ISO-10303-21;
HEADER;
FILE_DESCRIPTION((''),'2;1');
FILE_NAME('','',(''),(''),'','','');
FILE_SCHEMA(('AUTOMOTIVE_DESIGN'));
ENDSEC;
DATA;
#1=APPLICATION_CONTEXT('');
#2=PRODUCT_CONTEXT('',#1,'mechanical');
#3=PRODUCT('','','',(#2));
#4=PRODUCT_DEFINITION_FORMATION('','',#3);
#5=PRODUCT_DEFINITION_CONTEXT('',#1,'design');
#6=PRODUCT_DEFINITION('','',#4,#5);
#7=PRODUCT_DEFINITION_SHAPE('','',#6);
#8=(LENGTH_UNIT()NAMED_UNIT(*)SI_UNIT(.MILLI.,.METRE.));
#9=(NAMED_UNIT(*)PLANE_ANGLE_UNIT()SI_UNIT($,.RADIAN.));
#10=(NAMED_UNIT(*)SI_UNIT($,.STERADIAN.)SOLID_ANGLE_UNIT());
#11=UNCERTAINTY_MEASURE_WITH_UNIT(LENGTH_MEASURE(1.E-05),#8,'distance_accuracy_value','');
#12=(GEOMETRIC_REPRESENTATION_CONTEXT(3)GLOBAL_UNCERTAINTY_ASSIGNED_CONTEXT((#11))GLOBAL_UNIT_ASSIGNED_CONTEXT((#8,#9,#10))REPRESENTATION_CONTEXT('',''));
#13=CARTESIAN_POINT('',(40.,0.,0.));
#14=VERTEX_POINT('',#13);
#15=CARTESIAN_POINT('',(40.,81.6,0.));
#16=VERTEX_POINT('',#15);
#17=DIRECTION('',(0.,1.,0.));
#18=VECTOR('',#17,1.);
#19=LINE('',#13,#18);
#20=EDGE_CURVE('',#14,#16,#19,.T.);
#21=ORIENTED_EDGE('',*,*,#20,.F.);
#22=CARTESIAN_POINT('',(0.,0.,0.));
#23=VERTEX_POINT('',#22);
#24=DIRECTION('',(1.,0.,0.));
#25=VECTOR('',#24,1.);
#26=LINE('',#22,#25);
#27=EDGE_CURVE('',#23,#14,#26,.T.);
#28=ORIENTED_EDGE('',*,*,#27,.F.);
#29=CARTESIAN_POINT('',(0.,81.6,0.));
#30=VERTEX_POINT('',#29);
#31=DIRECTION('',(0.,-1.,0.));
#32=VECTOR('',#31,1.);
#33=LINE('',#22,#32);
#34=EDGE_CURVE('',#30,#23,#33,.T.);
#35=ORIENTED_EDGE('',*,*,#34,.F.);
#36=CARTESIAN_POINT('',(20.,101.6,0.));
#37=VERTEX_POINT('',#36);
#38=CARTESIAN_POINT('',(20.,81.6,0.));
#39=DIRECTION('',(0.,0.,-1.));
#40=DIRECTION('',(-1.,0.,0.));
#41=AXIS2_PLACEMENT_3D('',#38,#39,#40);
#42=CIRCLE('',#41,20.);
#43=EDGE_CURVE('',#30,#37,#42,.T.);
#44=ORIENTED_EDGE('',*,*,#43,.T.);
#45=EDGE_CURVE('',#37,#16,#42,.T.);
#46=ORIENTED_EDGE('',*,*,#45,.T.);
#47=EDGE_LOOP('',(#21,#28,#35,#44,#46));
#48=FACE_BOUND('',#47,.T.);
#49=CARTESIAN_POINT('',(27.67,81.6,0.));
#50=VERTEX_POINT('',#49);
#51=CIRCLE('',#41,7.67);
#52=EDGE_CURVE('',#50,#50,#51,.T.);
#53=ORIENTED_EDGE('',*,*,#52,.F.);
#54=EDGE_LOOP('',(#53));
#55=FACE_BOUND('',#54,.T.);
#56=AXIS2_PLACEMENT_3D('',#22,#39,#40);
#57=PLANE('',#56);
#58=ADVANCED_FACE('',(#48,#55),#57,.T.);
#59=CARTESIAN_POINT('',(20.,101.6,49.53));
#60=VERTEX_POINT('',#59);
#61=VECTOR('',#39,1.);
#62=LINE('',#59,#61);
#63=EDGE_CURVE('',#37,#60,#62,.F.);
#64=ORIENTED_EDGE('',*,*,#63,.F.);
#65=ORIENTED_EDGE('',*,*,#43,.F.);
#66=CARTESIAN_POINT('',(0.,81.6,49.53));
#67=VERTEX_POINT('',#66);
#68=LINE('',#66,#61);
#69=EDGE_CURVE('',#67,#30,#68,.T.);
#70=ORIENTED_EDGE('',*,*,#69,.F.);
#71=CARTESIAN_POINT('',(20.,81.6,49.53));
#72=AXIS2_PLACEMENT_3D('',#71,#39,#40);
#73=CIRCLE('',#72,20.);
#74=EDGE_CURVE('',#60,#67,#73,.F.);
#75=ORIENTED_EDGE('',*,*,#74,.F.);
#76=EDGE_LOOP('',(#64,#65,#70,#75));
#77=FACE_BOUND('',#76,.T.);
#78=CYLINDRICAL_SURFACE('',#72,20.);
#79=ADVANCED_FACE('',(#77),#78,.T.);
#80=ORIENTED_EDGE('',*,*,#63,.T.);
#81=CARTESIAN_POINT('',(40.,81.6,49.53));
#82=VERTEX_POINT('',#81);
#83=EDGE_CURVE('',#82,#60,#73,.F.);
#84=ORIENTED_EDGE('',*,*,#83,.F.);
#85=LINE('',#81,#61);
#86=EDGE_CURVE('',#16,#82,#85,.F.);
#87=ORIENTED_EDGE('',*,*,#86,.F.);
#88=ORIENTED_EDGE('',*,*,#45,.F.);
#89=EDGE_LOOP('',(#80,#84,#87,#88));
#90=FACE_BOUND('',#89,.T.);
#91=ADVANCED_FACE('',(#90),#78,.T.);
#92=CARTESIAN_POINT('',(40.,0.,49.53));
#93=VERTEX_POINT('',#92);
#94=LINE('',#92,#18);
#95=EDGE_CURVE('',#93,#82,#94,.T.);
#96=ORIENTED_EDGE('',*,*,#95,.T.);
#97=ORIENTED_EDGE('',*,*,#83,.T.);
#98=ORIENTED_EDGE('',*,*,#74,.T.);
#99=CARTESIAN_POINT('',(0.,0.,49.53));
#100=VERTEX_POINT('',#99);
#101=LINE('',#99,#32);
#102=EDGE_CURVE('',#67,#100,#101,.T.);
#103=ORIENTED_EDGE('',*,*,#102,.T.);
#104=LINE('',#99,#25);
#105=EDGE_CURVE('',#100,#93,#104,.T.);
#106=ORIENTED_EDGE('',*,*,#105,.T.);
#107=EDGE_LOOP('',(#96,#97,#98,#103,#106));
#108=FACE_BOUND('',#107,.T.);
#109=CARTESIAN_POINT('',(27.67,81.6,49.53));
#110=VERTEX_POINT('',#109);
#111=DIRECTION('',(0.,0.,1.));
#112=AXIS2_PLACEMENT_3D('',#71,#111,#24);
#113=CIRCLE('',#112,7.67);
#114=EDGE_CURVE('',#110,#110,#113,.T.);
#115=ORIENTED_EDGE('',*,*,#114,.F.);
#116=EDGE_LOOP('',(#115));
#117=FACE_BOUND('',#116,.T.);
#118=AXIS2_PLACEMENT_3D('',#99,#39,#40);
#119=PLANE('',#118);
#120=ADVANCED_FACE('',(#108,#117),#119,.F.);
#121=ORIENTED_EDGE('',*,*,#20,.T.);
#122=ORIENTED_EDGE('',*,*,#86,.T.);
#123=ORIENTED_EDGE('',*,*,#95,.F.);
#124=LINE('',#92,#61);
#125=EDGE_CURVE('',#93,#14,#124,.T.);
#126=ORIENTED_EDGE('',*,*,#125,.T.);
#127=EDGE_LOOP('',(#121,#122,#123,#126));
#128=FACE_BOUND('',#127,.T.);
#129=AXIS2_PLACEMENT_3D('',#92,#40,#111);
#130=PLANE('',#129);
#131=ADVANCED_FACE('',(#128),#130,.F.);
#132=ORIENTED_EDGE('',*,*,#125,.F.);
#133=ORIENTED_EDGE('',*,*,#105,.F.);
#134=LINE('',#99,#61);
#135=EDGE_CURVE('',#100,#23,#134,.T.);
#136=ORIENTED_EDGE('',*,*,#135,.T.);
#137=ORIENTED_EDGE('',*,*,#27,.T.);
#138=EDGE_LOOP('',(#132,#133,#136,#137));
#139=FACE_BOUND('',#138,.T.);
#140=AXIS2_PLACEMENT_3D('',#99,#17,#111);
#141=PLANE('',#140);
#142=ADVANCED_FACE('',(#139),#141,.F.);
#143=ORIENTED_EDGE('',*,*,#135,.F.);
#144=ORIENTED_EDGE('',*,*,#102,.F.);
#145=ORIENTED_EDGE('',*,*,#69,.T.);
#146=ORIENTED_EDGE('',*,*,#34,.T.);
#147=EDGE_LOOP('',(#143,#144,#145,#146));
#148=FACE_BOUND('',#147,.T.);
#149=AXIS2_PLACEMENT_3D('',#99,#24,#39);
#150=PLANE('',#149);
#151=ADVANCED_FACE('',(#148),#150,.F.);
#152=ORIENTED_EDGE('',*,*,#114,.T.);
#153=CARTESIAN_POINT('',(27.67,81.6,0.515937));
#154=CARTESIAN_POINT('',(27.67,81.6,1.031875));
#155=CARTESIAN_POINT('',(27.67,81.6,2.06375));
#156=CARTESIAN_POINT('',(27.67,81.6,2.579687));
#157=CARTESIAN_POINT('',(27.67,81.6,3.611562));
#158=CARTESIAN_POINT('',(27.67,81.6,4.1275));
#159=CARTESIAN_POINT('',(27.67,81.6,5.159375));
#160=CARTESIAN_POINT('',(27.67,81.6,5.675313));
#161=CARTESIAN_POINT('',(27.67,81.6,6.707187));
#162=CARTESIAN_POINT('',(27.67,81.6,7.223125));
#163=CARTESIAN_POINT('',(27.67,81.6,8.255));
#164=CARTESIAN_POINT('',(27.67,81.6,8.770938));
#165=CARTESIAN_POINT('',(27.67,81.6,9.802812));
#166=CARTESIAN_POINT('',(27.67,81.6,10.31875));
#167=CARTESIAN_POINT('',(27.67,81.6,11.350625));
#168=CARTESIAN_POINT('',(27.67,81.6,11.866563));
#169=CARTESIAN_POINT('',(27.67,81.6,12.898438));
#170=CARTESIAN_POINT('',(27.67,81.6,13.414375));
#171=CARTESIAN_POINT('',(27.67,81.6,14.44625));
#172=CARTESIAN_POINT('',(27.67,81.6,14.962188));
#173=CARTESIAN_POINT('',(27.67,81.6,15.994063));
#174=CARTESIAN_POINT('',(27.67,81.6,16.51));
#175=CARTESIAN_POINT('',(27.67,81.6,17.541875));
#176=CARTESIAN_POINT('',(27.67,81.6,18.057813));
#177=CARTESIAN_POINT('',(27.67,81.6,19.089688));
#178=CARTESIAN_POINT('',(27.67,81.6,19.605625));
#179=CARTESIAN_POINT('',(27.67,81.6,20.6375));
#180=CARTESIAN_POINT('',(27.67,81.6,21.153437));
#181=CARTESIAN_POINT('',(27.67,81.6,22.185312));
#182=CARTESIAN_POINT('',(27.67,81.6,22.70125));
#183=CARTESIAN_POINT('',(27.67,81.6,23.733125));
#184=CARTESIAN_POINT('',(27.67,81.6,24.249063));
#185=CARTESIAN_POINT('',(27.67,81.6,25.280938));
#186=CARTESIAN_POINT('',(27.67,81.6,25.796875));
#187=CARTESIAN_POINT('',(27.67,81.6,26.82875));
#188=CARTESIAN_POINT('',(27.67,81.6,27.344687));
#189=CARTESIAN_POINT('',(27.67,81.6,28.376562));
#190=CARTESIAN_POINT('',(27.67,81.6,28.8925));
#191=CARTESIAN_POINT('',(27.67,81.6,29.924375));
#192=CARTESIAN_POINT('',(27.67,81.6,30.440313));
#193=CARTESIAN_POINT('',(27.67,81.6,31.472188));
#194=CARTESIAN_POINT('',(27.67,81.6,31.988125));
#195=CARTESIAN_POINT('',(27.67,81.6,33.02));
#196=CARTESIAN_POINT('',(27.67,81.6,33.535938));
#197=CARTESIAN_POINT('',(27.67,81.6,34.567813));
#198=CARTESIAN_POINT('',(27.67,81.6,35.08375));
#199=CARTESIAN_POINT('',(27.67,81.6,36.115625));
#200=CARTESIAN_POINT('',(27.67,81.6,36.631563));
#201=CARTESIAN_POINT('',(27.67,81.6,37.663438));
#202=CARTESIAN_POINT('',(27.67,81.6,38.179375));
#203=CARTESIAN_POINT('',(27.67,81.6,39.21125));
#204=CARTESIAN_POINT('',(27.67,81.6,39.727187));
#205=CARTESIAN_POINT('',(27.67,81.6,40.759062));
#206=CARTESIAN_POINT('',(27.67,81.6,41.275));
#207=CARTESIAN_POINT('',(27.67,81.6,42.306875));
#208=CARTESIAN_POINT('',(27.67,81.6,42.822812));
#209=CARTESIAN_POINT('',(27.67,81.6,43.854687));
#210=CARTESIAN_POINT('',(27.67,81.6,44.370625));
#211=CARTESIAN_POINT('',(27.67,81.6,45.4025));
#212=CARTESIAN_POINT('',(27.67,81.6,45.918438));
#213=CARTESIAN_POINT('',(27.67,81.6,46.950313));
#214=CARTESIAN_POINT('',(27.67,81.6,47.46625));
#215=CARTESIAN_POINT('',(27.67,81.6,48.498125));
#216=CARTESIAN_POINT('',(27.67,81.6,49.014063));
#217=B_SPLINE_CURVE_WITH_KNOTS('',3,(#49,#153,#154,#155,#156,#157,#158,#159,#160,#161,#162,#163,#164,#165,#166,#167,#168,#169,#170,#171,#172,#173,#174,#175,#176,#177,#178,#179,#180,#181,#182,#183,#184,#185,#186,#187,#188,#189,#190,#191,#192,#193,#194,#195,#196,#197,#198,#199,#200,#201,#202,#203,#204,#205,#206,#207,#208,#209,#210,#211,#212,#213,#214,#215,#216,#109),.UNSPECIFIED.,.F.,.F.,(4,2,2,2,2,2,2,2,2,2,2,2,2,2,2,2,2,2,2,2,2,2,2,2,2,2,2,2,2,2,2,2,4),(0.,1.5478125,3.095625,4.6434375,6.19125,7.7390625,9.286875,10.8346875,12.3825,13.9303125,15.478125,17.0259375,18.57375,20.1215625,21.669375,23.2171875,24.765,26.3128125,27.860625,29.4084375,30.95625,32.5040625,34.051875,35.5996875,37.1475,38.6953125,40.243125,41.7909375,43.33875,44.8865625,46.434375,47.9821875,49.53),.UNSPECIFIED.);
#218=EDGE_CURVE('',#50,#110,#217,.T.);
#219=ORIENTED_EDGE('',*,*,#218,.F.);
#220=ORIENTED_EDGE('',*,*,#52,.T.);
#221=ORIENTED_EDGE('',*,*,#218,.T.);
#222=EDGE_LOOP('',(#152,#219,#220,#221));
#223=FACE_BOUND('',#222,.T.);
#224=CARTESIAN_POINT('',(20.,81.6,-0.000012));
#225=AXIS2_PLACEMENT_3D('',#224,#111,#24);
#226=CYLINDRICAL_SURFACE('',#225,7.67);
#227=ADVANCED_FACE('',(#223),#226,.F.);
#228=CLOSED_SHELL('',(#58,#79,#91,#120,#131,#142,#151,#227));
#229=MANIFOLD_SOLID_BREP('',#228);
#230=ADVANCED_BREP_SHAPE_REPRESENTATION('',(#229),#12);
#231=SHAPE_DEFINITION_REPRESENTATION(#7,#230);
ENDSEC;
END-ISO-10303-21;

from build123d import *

# Parameters (mm, degrees)
SKETCH1_W               = 40
SKETCH1_H               = 101.6
BOSS_EXTRUDE1_DEPTH     = 49.53
FILLET1_R               = 20
CUT_EXTRUDE2_DEPTH      = 120.899044617
CUT_EXTRUDE2_DEPTH_BACK = 120.899044617
SKETCH2_R               = 7.67


with BuildPart() as part:
    # Sketch1 → Boss-Extrude1 (new body)
    with BuildSketch(Plane.XY):
        with Locations((20, 50.8)):
            Rectangle(SKETCH1_W, SKETCH1_H)
    extrude(amount=BOSS_EXTRUDE1_DEPTH)

    # Fillet1
    fillet1_edges = [part.edges().sort_by_distance(p)[0] for p in [
        (40, 101.6, 24.765),
        (0, 101.6, 24.765),
    ]]
    fillet(fillet1_edges, radius=FILLET1_R - 0.0001)  # a hair under: the kernel refuses the full size

    # Sketch2 → Cut-Extrude2 (cut, two sides: drawn at the far end of the back side and taken through both)
    with BuildSketch(Plane.XY.offset(-CUT_EXTRUDE2_DEPTH_BACK)):
        with Locations((20, 81.6)):
            Circle(SKETCH2_R)
    extrude(amount=CUT_EXTRUDE2_DEPTH + CUT_EXTRUDE2_DEPTH_BACK, mode=Mode.SUBTRACT)


solid = part.part
